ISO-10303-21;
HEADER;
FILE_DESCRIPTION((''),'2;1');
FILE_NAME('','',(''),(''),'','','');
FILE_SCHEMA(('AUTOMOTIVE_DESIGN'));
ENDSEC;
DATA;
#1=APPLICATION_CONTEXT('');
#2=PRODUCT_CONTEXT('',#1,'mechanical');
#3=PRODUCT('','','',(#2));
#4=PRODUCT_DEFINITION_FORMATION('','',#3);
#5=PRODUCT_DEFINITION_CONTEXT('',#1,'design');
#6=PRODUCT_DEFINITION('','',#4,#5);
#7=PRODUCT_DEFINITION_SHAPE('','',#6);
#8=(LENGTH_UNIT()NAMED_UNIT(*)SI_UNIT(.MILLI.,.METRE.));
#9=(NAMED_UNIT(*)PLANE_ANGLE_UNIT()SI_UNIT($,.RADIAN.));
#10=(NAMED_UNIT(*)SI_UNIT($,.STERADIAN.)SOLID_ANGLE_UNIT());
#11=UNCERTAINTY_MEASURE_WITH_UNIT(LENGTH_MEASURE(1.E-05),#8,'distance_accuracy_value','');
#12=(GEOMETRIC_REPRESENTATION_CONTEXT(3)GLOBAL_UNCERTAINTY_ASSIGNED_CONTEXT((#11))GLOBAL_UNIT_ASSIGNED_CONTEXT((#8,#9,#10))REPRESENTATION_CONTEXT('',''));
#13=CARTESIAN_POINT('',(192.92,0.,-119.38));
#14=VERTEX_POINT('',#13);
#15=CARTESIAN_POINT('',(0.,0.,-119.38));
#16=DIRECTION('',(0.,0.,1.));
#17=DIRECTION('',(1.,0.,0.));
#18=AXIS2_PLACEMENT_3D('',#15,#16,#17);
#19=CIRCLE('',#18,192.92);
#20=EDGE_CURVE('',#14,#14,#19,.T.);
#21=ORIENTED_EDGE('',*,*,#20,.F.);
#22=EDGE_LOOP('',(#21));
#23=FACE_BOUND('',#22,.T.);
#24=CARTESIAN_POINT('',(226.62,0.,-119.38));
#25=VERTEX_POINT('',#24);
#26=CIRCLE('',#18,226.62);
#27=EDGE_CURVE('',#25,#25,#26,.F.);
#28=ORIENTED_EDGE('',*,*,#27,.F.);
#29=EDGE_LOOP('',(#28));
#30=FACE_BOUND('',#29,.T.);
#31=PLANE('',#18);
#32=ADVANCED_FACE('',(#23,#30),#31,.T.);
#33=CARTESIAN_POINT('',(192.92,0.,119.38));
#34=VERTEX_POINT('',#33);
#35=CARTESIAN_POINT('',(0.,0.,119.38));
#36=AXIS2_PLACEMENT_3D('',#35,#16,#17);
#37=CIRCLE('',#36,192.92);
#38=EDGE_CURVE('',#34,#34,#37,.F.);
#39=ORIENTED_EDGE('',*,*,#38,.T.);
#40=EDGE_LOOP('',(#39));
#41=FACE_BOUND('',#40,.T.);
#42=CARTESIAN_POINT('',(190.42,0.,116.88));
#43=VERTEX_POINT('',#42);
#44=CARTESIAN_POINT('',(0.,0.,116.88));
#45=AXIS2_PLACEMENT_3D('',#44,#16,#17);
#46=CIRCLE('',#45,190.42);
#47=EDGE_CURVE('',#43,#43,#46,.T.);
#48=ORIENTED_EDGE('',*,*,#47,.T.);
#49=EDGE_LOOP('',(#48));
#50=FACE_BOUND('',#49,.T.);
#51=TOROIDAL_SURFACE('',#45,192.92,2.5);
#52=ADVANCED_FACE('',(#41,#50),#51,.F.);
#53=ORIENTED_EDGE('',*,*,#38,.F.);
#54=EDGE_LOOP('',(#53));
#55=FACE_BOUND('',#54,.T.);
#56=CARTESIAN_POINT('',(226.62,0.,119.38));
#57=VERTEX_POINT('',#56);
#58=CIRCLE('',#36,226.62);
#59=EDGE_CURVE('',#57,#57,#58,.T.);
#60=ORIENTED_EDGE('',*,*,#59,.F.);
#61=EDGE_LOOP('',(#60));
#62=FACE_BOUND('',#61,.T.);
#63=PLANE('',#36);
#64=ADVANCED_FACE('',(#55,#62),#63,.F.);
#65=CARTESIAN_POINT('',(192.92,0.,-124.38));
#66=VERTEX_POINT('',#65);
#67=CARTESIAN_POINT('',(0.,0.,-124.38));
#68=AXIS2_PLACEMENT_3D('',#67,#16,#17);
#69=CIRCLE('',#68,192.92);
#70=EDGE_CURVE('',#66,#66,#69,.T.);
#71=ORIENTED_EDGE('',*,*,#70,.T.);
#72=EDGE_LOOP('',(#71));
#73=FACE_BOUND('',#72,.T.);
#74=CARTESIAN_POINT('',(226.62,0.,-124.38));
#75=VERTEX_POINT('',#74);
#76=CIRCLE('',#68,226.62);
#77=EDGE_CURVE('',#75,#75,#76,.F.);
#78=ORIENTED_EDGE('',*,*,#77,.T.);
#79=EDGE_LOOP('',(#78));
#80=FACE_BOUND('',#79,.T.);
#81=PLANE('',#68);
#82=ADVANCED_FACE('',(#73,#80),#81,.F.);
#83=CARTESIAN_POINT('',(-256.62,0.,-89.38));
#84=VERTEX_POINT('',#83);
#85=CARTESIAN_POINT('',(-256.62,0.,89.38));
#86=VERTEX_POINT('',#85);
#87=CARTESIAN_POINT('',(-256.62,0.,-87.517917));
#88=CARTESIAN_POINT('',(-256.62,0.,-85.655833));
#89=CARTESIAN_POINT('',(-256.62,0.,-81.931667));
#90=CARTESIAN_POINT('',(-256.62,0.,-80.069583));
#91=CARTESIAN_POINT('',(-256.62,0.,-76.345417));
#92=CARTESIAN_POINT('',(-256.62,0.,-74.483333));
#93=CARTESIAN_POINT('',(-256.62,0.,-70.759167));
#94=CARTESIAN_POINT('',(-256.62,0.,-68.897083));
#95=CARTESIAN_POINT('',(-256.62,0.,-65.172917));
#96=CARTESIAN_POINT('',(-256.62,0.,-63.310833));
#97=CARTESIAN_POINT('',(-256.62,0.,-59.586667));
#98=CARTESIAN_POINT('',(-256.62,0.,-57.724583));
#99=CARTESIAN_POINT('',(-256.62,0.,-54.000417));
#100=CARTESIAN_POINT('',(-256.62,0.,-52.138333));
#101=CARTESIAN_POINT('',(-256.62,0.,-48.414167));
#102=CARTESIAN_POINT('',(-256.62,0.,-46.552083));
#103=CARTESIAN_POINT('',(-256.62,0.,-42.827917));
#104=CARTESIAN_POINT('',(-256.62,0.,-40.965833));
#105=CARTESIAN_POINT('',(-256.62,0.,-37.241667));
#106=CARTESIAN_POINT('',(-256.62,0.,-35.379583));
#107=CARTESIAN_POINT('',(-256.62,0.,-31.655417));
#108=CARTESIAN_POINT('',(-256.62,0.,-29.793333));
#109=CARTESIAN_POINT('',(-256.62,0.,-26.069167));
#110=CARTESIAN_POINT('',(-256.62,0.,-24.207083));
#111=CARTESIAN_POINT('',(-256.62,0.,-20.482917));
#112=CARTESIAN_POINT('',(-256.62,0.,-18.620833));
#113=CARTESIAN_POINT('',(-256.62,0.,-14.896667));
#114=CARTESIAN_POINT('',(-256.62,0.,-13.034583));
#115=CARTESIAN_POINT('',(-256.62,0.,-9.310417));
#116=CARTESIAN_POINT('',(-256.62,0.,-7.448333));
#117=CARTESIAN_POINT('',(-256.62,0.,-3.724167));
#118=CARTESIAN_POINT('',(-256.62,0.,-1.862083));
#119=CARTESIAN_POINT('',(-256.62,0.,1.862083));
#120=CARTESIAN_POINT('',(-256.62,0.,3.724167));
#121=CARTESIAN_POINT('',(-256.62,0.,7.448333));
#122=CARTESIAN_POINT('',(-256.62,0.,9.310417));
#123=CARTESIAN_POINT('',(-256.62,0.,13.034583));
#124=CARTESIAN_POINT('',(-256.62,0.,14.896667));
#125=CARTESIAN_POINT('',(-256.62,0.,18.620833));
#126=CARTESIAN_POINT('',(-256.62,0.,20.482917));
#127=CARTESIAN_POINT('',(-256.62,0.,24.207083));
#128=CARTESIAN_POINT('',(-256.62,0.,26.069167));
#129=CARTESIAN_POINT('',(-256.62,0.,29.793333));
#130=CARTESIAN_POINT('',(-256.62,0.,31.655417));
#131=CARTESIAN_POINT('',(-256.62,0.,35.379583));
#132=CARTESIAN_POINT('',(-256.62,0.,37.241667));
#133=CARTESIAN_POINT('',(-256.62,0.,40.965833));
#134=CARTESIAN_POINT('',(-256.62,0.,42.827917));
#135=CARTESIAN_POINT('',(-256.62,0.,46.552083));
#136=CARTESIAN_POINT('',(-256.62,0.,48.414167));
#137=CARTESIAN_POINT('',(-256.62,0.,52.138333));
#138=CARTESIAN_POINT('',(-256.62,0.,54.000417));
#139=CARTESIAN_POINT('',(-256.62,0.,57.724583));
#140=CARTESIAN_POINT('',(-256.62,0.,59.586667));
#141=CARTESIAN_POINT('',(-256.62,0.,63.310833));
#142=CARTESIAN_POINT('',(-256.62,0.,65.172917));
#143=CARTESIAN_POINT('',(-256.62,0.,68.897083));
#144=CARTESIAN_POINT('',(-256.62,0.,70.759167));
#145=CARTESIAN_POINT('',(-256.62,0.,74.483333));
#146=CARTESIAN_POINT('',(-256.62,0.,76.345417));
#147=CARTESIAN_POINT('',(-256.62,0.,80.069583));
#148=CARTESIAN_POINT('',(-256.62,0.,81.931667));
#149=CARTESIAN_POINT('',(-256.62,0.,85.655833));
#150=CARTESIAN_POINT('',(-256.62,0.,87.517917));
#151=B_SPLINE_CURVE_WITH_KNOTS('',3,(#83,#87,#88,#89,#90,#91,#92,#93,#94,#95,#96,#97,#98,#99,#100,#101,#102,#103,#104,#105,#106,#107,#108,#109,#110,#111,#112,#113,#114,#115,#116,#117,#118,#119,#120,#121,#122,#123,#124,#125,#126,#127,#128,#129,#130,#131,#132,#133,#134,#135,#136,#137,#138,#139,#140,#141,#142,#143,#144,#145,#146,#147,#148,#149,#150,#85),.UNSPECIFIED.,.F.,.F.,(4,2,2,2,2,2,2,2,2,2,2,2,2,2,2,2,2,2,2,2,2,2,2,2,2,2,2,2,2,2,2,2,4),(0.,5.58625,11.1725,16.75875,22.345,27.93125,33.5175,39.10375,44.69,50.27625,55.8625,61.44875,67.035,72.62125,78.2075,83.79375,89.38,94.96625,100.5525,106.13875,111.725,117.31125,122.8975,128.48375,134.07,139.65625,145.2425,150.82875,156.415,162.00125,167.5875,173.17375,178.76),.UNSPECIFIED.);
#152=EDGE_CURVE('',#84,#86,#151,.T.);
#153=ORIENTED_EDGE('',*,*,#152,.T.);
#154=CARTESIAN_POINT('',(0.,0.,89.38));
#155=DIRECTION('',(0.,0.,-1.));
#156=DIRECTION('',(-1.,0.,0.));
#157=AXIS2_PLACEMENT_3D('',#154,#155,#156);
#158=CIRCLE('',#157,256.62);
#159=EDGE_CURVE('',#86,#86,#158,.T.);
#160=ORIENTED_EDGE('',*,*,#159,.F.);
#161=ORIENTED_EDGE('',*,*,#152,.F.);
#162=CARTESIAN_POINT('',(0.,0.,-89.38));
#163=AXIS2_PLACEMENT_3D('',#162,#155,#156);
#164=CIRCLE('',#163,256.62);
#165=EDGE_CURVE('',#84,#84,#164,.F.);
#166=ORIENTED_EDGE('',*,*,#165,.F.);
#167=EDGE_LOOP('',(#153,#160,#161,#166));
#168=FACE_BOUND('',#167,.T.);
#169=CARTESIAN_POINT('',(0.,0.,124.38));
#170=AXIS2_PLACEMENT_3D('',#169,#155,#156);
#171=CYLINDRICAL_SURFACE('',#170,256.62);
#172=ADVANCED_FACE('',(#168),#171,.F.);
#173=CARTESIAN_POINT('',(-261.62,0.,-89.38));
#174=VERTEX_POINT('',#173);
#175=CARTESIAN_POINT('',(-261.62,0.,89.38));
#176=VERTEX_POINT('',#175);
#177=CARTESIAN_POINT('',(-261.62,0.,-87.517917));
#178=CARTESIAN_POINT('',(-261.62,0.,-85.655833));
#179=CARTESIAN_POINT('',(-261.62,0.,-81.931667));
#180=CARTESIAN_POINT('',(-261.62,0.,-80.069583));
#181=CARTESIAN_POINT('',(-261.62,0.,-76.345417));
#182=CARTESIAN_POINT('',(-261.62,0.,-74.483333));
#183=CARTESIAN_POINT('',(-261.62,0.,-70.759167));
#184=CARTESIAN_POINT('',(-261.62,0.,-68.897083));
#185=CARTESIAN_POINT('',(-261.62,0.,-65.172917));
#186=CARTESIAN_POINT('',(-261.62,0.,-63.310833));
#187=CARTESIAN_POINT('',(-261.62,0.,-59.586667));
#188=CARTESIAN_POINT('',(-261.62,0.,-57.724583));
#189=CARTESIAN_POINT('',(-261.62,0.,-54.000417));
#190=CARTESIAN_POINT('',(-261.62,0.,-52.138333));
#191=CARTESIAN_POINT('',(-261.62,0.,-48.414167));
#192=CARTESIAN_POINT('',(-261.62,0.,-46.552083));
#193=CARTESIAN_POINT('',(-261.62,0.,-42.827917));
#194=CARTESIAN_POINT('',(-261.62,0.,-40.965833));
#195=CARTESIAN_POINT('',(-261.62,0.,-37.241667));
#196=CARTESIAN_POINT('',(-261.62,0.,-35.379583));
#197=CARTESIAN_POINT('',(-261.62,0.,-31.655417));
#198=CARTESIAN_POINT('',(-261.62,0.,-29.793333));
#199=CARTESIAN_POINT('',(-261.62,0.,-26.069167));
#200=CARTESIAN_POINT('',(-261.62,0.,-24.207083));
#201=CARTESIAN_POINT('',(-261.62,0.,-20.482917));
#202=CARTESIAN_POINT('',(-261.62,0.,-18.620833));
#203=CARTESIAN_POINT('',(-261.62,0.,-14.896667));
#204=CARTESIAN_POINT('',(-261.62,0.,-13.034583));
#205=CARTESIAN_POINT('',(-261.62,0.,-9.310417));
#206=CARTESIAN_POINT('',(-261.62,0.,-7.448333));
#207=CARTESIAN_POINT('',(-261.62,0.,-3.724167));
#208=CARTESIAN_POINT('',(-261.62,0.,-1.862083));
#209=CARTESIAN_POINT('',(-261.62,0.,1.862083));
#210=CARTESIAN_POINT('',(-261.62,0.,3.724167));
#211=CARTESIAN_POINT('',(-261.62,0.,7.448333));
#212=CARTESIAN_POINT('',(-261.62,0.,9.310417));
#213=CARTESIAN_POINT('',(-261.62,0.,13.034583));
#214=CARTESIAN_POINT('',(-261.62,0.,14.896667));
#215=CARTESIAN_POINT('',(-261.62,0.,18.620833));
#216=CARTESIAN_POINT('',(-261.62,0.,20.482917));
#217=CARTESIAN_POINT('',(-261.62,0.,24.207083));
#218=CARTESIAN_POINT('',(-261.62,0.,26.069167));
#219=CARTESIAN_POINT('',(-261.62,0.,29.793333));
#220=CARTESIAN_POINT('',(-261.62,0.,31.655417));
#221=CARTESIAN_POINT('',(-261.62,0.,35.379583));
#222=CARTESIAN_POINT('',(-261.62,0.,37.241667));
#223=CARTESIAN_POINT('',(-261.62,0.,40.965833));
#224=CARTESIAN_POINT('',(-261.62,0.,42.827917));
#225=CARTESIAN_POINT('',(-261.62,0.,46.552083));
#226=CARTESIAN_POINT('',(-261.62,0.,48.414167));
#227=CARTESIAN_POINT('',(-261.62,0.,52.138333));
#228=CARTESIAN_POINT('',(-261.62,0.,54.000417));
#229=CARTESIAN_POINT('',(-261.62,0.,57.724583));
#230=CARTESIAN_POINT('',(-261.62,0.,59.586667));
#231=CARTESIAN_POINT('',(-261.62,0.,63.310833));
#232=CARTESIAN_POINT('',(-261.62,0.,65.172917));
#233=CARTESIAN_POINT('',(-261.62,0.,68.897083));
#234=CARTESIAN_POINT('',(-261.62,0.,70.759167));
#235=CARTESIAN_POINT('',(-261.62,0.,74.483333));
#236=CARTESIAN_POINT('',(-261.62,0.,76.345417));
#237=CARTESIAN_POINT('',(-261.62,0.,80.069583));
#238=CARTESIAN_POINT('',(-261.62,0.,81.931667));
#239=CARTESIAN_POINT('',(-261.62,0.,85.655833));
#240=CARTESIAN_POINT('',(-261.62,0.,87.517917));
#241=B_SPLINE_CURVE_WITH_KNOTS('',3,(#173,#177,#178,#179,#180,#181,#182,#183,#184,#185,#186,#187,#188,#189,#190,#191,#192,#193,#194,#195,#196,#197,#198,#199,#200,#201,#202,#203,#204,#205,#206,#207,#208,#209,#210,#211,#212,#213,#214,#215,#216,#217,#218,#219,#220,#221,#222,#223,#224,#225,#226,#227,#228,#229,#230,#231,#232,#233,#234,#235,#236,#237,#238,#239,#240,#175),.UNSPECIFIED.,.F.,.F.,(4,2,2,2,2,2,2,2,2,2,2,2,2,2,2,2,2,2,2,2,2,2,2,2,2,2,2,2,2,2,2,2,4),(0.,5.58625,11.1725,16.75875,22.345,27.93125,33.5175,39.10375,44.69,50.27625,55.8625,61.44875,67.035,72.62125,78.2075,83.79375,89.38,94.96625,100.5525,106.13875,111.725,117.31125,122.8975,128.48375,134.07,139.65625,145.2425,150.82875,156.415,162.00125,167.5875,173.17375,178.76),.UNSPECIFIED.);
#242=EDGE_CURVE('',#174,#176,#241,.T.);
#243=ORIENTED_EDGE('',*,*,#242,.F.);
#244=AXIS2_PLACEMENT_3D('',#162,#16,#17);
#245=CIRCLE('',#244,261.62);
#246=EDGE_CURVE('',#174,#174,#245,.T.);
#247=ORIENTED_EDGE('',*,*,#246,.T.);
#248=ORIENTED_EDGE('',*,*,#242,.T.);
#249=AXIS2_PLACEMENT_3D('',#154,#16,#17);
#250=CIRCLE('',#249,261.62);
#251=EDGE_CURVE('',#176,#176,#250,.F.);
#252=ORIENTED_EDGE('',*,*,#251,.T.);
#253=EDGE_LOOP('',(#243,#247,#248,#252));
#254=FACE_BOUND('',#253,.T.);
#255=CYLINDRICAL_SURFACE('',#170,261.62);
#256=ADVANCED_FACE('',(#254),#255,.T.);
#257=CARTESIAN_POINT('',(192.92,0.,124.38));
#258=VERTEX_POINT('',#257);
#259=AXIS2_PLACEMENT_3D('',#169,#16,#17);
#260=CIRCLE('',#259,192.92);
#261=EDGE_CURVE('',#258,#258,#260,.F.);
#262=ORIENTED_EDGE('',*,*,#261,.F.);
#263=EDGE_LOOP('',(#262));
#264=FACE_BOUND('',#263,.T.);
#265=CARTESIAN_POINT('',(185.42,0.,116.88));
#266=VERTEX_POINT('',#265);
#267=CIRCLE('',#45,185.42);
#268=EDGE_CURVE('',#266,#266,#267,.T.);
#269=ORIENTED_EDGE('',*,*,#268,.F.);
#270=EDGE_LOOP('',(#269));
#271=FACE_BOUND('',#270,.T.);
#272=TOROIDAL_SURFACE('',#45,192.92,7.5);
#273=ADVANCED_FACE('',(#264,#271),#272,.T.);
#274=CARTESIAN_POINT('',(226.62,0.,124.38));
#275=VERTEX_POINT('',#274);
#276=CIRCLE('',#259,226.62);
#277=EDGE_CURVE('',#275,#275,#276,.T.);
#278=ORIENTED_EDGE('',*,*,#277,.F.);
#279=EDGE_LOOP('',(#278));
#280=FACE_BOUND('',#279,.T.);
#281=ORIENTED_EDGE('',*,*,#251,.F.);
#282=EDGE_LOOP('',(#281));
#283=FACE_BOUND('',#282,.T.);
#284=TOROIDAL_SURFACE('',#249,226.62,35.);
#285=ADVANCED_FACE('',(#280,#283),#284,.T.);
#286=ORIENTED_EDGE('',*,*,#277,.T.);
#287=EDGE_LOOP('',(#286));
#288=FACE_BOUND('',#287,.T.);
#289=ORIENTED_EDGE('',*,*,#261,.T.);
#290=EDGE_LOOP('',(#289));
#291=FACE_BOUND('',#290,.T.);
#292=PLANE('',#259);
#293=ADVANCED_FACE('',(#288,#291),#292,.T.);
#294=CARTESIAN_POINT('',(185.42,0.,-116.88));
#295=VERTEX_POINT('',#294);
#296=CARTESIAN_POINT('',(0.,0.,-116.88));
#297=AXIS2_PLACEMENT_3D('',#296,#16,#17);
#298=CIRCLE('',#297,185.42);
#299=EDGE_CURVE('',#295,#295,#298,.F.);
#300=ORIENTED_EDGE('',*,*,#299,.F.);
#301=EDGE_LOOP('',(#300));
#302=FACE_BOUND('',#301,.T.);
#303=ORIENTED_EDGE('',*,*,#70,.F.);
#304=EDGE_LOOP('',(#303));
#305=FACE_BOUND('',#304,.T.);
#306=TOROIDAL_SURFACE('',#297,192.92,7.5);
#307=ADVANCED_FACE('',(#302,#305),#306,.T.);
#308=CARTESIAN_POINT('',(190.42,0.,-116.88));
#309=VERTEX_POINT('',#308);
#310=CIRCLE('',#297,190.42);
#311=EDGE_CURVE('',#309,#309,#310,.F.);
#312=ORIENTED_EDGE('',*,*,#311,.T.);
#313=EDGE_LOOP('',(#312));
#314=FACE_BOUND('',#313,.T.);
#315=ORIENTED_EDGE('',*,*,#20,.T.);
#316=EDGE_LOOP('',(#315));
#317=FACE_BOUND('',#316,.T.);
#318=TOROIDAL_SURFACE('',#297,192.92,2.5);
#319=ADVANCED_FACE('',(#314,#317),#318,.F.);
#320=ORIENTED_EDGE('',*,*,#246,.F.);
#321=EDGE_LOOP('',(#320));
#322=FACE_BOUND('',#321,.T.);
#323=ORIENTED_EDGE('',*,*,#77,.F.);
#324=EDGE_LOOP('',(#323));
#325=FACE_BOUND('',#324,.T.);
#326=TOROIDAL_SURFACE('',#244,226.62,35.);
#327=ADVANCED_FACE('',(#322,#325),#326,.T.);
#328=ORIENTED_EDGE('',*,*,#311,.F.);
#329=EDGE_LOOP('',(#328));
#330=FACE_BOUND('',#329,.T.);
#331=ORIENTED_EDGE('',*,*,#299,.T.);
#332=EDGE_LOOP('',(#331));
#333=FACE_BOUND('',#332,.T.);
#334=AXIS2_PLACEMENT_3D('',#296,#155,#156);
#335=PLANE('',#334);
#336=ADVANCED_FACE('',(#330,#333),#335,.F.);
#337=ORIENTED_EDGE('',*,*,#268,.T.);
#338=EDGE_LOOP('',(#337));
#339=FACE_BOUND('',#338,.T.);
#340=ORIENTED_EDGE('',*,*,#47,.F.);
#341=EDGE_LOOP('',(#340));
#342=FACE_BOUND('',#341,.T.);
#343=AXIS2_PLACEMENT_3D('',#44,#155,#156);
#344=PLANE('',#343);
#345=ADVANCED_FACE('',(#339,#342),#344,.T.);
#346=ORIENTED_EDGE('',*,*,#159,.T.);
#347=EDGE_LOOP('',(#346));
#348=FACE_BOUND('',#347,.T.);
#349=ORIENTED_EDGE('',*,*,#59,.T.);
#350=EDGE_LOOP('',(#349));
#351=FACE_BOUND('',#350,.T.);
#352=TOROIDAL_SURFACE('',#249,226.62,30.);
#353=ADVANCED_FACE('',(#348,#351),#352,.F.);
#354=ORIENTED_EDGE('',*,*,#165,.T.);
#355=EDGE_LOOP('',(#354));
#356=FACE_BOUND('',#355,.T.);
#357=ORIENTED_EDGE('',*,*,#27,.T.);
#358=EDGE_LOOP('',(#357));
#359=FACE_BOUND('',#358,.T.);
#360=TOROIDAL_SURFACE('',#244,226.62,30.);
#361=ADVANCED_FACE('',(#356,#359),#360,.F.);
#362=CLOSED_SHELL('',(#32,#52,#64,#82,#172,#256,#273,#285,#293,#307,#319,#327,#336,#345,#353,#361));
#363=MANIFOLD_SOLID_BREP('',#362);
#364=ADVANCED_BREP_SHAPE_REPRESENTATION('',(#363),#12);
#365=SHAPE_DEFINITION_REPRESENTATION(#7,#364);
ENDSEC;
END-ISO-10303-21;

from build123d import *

# Parameters (mm, degrees)
SKETCH1_R           = 261.62
SKETCH1_R_2         = 185.42
EXTRUDE_THIN1_DEPTH = 124.38
FILLET1_R           = 35
FILLET2_R           = 7.5


# Read off the part's stored shape, not the designer's step: Shell1
with BuildPart() as part:
    # Sketch1 → Extrude-Thin1 (new, symmetric)
    with BuildSketch(Plane.XY):
        Circle(SKETCH1_R)
        Circle(SKETCH1_R_2, mode=Mode.SUBTRACT)
    extrude(amount=EXTRUDE_THIN1_DEPTH, both=True)

    # Fillet1
    fillet1_edges = [part.edges().sort_by_distance(p)[0] for p in [
        (-261.62, 0, -124.38),
        (-261.62, 0, 124.38),
    ]]
    fillet(fillet1_edges, radius=FILLET1_R)

    # Fillet2
    fillet2_edges = [part.edges().sort_by_distance(p)[0] for p in [
        (-185.42, 0, -124.38),
        (-185.42, 0, 124.38),
    ]]
    fillet(fillet2_edges, radius=FILLET2_R)

    # Shell1 outline → Shell1 (revolve, cut)
    with BuildSketch(Plane.XZ):
        with BuildLine():
            Line((190.42, 116.88), (185.42, 116.88))
            Line((185.42, 116.88), (185.42, -116.88))
            Line((185.42, -116.88), (190.42, -116.88))
            ThreePointArc((190.42, -116.88), (191.152233047, -118.647766953), (192.92, -119.38))
            Line((192.92, -119.38), (226.62, -119.38))
            ThreePointArc((226.62, -119.38), (247.833203436, -110.593203436), (256.62, -89.38))
            Line((256.62, -89.38), (256.62, 89.38))
            ThreePointArc((256.62, 89.38), (247.833203436, 110.593203436), (226.62, 119.38))
            Line((226.62, 119.38), (192.92, 119.38))
            ThreePointArc((192.92, 119.38), (191.152233047, 118.647766953), (190.42, 116.88))
        make_face()
    revolve(axis=Axis((0, 0, 0), (0, 0, 1)), mode=Mode.SUBTRACT)


solid = part.part
